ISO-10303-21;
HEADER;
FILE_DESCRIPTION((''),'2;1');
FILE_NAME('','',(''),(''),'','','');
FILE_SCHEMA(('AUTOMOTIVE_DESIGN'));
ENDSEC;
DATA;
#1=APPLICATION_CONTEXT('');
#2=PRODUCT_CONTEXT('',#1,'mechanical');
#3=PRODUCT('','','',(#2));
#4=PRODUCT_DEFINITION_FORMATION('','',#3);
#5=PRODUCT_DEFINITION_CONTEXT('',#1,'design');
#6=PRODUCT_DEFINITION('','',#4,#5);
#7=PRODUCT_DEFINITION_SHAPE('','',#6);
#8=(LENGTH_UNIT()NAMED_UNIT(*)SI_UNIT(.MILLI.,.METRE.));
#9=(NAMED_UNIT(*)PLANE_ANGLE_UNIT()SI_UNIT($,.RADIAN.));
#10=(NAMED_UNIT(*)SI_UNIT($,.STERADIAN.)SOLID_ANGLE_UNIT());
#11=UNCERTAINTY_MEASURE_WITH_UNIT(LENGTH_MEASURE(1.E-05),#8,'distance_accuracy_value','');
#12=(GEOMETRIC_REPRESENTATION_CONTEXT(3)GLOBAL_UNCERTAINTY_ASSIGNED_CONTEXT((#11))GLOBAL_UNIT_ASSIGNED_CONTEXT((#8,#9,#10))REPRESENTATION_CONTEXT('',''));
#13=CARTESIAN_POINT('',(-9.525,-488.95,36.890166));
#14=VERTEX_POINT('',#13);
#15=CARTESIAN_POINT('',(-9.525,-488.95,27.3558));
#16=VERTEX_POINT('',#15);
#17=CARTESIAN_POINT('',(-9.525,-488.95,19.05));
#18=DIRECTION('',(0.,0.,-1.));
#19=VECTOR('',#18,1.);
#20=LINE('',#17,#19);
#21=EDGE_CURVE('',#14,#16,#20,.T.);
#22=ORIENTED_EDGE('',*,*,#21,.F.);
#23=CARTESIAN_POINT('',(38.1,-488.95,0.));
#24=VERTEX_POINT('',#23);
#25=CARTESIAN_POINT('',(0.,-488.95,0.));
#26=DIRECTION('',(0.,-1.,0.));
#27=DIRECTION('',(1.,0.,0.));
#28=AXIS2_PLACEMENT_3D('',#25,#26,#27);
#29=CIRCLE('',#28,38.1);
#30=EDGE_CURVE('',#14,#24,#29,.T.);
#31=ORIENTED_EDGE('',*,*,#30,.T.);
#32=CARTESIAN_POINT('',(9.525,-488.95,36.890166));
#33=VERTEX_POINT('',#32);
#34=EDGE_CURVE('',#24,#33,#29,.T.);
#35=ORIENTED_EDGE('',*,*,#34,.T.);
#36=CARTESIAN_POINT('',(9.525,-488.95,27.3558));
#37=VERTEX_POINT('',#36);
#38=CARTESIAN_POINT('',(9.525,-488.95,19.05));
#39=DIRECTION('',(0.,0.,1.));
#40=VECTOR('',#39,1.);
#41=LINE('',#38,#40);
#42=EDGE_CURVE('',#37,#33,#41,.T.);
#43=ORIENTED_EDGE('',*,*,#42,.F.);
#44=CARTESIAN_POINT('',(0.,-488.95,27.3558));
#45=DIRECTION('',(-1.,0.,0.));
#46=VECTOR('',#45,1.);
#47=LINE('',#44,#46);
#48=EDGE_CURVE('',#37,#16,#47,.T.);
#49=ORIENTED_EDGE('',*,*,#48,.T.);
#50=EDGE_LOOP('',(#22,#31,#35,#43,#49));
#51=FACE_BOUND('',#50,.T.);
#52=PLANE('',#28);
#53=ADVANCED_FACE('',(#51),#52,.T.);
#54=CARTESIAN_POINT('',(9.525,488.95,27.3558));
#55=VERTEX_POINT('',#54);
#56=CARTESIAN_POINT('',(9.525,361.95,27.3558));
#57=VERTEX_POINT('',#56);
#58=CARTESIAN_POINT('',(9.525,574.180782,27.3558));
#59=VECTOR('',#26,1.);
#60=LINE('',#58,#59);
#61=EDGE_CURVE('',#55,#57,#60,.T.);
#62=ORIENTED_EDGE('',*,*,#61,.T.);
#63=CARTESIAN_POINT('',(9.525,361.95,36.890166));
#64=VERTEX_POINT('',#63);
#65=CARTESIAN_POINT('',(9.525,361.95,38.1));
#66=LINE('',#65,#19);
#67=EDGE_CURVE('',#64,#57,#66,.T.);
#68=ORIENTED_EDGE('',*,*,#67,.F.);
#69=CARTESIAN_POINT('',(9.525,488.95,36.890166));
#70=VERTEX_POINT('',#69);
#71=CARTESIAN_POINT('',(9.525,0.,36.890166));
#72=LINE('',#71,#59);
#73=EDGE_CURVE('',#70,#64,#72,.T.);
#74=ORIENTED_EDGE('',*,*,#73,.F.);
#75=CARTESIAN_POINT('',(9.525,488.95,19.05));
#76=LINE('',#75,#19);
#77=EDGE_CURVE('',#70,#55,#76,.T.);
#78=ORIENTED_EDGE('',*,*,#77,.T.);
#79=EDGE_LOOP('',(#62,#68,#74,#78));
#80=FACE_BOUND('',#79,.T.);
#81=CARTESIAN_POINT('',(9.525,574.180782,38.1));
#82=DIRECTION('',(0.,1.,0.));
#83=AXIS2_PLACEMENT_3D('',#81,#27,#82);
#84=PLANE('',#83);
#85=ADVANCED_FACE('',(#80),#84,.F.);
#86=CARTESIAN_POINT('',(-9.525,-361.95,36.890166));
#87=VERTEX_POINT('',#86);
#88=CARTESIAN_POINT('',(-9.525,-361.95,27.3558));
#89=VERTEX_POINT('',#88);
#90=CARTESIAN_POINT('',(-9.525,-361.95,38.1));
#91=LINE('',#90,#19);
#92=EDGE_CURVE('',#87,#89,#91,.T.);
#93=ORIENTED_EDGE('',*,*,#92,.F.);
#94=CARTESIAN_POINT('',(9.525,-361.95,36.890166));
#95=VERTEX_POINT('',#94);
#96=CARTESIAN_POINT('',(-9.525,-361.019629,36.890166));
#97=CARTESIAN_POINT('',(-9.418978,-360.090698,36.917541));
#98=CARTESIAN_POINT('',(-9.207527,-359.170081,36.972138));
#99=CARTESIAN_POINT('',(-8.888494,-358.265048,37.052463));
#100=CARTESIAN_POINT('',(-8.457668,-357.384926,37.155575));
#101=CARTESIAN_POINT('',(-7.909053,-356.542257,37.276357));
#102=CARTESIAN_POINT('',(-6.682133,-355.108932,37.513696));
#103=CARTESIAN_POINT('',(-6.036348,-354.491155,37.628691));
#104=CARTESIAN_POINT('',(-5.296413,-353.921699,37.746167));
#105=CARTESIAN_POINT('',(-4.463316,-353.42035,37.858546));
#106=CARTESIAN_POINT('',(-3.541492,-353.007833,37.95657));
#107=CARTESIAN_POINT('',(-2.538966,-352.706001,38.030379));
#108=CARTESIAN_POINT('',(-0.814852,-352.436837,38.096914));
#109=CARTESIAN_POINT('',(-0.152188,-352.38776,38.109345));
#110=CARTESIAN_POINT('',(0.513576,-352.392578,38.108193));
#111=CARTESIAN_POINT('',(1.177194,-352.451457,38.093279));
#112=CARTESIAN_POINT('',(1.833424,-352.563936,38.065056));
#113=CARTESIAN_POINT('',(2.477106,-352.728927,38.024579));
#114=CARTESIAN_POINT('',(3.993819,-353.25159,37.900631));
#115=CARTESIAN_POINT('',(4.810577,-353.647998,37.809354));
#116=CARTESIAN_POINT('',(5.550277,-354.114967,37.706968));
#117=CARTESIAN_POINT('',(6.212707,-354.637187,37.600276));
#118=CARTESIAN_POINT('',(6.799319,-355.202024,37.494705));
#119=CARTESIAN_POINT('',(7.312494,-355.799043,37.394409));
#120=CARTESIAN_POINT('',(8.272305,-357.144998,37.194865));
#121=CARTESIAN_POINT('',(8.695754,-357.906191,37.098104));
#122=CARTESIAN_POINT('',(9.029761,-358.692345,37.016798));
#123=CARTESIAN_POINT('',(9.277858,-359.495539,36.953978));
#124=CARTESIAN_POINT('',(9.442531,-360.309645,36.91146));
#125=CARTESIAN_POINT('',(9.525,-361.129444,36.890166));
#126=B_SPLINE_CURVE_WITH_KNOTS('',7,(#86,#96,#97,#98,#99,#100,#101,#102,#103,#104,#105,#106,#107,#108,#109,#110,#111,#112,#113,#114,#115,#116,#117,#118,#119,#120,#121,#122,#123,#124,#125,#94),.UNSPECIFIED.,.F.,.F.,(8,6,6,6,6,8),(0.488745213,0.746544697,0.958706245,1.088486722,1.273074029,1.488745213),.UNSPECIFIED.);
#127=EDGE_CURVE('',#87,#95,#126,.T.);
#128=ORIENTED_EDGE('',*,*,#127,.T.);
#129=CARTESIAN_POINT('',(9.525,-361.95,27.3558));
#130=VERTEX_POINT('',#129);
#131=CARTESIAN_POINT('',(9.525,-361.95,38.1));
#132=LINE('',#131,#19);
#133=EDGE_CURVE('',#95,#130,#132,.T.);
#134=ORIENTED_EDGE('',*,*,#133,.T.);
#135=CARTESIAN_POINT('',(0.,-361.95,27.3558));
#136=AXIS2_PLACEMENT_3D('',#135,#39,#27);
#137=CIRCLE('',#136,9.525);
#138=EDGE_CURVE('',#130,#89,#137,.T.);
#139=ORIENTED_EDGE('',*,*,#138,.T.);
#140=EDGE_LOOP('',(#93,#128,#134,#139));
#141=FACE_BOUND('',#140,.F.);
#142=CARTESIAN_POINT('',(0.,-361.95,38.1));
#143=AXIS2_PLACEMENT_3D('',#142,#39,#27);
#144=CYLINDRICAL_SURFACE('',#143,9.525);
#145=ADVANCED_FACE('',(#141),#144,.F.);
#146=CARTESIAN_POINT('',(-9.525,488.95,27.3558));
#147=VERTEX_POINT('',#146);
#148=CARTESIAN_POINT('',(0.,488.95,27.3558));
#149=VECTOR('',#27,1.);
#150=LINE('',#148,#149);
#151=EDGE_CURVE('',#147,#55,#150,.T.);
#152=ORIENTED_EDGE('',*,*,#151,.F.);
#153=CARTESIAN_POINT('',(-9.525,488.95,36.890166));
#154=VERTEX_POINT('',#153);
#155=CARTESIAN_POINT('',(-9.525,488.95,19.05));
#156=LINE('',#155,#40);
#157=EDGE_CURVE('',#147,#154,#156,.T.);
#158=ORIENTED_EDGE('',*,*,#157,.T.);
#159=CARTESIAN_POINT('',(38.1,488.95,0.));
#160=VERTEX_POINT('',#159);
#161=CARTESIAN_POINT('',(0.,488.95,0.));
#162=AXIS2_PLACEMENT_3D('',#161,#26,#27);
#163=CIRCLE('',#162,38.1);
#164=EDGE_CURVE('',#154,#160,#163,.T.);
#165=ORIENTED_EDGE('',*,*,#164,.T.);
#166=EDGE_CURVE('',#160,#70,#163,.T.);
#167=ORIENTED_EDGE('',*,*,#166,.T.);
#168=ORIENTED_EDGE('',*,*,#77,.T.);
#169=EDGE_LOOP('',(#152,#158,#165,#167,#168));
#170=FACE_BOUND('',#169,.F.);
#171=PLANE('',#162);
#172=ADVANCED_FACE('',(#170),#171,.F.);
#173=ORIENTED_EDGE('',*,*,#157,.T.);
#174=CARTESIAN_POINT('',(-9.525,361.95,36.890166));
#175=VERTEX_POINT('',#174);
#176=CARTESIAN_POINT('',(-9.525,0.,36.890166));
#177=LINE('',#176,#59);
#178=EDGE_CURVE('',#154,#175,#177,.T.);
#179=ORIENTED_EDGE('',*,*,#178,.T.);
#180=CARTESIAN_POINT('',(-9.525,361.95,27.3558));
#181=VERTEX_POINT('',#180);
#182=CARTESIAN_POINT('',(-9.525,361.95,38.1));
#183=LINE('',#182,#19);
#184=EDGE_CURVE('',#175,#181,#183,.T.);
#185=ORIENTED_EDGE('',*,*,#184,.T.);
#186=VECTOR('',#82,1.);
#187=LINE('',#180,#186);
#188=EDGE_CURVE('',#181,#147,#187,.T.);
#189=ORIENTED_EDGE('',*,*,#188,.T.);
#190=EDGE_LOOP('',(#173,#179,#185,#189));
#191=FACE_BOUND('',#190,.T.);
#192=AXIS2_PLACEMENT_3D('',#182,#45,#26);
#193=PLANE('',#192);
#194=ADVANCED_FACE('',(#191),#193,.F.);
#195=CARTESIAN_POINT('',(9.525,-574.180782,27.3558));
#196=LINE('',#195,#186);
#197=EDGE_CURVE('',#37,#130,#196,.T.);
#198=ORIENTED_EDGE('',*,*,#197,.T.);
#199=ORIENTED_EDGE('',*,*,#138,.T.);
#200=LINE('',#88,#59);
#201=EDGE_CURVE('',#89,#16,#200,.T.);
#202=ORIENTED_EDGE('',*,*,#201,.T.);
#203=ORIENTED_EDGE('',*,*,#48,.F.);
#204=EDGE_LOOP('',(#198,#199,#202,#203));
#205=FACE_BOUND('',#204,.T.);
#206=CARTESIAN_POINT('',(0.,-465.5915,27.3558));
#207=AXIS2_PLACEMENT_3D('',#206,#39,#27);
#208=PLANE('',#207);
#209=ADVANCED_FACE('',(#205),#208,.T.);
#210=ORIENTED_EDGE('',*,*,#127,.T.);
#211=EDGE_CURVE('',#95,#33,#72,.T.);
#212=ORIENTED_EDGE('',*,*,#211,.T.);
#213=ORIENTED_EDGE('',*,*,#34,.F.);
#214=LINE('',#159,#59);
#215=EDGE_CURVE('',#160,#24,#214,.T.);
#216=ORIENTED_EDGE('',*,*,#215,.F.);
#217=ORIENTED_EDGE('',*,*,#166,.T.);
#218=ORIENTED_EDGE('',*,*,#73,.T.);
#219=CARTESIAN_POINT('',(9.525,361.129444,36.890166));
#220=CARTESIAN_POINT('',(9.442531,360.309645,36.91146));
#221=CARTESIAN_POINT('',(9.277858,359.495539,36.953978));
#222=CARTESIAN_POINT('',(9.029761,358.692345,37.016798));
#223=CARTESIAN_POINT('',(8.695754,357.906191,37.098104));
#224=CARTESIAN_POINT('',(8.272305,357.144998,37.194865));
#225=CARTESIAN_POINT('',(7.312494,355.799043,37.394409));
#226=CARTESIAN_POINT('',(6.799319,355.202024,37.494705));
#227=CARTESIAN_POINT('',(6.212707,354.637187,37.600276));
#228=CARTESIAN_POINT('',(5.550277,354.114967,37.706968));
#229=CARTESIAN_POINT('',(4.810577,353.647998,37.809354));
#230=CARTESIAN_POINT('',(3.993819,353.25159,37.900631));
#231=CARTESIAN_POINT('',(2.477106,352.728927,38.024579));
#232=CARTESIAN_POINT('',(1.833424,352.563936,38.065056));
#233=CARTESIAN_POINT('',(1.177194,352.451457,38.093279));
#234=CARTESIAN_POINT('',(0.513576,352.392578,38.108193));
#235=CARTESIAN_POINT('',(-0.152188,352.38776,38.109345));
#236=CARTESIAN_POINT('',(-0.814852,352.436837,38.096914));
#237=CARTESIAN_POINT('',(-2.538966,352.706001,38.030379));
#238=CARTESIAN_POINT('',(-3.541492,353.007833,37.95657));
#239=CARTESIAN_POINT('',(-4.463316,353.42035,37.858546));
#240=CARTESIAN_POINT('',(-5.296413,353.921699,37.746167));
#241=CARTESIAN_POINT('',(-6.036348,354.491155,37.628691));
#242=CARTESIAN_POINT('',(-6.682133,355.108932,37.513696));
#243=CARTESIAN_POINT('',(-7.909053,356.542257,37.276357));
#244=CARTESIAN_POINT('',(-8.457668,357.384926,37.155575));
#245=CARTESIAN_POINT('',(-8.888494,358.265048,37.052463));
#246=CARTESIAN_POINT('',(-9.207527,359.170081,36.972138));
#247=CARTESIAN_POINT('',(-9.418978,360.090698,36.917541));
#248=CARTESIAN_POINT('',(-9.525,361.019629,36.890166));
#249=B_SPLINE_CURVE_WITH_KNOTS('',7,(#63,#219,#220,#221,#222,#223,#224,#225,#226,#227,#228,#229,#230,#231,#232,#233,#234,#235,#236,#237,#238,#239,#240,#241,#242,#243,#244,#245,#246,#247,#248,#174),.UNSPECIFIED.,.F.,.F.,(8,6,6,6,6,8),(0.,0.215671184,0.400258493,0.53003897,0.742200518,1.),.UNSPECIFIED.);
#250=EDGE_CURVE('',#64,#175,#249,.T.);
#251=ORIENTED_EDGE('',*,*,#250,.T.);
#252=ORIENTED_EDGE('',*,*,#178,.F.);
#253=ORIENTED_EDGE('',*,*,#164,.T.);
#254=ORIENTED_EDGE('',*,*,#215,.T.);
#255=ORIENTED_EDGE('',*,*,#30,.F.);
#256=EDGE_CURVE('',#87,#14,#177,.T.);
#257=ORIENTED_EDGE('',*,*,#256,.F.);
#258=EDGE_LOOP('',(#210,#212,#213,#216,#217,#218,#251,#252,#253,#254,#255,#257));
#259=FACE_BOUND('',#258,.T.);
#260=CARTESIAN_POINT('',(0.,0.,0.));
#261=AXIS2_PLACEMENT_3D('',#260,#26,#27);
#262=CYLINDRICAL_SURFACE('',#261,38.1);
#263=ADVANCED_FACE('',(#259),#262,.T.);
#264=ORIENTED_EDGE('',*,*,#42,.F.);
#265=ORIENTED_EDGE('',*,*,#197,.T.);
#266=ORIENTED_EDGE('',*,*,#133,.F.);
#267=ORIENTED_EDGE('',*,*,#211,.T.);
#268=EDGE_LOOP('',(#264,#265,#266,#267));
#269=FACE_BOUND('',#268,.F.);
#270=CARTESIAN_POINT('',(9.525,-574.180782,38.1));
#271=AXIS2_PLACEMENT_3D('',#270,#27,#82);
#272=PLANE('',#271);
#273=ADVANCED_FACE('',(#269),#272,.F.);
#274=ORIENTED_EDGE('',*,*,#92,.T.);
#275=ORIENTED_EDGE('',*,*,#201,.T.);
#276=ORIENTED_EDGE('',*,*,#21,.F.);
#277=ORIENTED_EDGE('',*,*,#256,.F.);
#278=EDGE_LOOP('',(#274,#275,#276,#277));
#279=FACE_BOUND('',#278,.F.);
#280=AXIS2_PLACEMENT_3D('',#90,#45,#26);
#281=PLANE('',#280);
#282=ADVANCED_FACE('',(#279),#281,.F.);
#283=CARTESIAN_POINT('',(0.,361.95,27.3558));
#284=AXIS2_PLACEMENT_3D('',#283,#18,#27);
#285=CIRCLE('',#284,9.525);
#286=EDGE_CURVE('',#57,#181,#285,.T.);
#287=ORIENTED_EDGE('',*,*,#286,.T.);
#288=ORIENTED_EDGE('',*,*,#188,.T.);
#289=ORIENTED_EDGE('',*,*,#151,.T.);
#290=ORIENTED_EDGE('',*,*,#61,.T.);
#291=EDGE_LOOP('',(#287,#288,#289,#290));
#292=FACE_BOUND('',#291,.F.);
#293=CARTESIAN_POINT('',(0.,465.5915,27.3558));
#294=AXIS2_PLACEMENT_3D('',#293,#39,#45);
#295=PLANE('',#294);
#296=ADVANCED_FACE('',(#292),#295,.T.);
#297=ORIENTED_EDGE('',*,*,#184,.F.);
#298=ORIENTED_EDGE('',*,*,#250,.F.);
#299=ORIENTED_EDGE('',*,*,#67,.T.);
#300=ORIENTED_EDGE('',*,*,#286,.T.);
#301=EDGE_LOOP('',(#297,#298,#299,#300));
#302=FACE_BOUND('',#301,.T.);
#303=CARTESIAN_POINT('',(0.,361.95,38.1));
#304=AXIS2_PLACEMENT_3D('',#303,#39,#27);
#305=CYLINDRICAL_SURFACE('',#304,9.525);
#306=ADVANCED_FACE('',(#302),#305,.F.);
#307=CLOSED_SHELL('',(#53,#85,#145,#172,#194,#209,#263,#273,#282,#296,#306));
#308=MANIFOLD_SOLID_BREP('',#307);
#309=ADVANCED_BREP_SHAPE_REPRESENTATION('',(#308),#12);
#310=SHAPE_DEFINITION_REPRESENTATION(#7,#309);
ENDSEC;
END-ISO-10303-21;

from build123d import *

# Parameters (mm, degrees)
F0_R     = 38.1
F1_DEPTH = 488.95
F4_DEPTH = 10.7442


# Not quite as in the source:
# - a pattern or mirror of a feature is missing from the dataset's text; its kind, count and spacing are read off the source's solid


with BuildPart() as f1:
    # F0 (on Front) → F1 (new body, symmetric)
    with BuildSketch(Plane.XZ):
        Circle(F0_R)
    extrude(amount=F1_DEPTH, both=True)

    # F3 (on offset) → F4 (cut)
    with BuildSketch(Plane.XY.offset(38.1)):
        with BuildLine():
            Line((-9.525, -361.95), (-9.525, -574.1807818413))
            Line((-9.525, -574.1807818413), (9.525, -574.1807818413))
            Line((9.525, -574.1807818413), (9.525, -361.95))
            ThreePointArc((9.525, -361.95), (0, -352.425), (-9.525, -361.95))
        make_face()
    f4 = extrude(amount=-F4_DEPTH, mode=Mode.SUBTRACT)

    # F4_copies: F4 across plane
    add(f4.mirror(Plane.ZX), mode=Mode.SUBTRACT)


solid = f1.part
